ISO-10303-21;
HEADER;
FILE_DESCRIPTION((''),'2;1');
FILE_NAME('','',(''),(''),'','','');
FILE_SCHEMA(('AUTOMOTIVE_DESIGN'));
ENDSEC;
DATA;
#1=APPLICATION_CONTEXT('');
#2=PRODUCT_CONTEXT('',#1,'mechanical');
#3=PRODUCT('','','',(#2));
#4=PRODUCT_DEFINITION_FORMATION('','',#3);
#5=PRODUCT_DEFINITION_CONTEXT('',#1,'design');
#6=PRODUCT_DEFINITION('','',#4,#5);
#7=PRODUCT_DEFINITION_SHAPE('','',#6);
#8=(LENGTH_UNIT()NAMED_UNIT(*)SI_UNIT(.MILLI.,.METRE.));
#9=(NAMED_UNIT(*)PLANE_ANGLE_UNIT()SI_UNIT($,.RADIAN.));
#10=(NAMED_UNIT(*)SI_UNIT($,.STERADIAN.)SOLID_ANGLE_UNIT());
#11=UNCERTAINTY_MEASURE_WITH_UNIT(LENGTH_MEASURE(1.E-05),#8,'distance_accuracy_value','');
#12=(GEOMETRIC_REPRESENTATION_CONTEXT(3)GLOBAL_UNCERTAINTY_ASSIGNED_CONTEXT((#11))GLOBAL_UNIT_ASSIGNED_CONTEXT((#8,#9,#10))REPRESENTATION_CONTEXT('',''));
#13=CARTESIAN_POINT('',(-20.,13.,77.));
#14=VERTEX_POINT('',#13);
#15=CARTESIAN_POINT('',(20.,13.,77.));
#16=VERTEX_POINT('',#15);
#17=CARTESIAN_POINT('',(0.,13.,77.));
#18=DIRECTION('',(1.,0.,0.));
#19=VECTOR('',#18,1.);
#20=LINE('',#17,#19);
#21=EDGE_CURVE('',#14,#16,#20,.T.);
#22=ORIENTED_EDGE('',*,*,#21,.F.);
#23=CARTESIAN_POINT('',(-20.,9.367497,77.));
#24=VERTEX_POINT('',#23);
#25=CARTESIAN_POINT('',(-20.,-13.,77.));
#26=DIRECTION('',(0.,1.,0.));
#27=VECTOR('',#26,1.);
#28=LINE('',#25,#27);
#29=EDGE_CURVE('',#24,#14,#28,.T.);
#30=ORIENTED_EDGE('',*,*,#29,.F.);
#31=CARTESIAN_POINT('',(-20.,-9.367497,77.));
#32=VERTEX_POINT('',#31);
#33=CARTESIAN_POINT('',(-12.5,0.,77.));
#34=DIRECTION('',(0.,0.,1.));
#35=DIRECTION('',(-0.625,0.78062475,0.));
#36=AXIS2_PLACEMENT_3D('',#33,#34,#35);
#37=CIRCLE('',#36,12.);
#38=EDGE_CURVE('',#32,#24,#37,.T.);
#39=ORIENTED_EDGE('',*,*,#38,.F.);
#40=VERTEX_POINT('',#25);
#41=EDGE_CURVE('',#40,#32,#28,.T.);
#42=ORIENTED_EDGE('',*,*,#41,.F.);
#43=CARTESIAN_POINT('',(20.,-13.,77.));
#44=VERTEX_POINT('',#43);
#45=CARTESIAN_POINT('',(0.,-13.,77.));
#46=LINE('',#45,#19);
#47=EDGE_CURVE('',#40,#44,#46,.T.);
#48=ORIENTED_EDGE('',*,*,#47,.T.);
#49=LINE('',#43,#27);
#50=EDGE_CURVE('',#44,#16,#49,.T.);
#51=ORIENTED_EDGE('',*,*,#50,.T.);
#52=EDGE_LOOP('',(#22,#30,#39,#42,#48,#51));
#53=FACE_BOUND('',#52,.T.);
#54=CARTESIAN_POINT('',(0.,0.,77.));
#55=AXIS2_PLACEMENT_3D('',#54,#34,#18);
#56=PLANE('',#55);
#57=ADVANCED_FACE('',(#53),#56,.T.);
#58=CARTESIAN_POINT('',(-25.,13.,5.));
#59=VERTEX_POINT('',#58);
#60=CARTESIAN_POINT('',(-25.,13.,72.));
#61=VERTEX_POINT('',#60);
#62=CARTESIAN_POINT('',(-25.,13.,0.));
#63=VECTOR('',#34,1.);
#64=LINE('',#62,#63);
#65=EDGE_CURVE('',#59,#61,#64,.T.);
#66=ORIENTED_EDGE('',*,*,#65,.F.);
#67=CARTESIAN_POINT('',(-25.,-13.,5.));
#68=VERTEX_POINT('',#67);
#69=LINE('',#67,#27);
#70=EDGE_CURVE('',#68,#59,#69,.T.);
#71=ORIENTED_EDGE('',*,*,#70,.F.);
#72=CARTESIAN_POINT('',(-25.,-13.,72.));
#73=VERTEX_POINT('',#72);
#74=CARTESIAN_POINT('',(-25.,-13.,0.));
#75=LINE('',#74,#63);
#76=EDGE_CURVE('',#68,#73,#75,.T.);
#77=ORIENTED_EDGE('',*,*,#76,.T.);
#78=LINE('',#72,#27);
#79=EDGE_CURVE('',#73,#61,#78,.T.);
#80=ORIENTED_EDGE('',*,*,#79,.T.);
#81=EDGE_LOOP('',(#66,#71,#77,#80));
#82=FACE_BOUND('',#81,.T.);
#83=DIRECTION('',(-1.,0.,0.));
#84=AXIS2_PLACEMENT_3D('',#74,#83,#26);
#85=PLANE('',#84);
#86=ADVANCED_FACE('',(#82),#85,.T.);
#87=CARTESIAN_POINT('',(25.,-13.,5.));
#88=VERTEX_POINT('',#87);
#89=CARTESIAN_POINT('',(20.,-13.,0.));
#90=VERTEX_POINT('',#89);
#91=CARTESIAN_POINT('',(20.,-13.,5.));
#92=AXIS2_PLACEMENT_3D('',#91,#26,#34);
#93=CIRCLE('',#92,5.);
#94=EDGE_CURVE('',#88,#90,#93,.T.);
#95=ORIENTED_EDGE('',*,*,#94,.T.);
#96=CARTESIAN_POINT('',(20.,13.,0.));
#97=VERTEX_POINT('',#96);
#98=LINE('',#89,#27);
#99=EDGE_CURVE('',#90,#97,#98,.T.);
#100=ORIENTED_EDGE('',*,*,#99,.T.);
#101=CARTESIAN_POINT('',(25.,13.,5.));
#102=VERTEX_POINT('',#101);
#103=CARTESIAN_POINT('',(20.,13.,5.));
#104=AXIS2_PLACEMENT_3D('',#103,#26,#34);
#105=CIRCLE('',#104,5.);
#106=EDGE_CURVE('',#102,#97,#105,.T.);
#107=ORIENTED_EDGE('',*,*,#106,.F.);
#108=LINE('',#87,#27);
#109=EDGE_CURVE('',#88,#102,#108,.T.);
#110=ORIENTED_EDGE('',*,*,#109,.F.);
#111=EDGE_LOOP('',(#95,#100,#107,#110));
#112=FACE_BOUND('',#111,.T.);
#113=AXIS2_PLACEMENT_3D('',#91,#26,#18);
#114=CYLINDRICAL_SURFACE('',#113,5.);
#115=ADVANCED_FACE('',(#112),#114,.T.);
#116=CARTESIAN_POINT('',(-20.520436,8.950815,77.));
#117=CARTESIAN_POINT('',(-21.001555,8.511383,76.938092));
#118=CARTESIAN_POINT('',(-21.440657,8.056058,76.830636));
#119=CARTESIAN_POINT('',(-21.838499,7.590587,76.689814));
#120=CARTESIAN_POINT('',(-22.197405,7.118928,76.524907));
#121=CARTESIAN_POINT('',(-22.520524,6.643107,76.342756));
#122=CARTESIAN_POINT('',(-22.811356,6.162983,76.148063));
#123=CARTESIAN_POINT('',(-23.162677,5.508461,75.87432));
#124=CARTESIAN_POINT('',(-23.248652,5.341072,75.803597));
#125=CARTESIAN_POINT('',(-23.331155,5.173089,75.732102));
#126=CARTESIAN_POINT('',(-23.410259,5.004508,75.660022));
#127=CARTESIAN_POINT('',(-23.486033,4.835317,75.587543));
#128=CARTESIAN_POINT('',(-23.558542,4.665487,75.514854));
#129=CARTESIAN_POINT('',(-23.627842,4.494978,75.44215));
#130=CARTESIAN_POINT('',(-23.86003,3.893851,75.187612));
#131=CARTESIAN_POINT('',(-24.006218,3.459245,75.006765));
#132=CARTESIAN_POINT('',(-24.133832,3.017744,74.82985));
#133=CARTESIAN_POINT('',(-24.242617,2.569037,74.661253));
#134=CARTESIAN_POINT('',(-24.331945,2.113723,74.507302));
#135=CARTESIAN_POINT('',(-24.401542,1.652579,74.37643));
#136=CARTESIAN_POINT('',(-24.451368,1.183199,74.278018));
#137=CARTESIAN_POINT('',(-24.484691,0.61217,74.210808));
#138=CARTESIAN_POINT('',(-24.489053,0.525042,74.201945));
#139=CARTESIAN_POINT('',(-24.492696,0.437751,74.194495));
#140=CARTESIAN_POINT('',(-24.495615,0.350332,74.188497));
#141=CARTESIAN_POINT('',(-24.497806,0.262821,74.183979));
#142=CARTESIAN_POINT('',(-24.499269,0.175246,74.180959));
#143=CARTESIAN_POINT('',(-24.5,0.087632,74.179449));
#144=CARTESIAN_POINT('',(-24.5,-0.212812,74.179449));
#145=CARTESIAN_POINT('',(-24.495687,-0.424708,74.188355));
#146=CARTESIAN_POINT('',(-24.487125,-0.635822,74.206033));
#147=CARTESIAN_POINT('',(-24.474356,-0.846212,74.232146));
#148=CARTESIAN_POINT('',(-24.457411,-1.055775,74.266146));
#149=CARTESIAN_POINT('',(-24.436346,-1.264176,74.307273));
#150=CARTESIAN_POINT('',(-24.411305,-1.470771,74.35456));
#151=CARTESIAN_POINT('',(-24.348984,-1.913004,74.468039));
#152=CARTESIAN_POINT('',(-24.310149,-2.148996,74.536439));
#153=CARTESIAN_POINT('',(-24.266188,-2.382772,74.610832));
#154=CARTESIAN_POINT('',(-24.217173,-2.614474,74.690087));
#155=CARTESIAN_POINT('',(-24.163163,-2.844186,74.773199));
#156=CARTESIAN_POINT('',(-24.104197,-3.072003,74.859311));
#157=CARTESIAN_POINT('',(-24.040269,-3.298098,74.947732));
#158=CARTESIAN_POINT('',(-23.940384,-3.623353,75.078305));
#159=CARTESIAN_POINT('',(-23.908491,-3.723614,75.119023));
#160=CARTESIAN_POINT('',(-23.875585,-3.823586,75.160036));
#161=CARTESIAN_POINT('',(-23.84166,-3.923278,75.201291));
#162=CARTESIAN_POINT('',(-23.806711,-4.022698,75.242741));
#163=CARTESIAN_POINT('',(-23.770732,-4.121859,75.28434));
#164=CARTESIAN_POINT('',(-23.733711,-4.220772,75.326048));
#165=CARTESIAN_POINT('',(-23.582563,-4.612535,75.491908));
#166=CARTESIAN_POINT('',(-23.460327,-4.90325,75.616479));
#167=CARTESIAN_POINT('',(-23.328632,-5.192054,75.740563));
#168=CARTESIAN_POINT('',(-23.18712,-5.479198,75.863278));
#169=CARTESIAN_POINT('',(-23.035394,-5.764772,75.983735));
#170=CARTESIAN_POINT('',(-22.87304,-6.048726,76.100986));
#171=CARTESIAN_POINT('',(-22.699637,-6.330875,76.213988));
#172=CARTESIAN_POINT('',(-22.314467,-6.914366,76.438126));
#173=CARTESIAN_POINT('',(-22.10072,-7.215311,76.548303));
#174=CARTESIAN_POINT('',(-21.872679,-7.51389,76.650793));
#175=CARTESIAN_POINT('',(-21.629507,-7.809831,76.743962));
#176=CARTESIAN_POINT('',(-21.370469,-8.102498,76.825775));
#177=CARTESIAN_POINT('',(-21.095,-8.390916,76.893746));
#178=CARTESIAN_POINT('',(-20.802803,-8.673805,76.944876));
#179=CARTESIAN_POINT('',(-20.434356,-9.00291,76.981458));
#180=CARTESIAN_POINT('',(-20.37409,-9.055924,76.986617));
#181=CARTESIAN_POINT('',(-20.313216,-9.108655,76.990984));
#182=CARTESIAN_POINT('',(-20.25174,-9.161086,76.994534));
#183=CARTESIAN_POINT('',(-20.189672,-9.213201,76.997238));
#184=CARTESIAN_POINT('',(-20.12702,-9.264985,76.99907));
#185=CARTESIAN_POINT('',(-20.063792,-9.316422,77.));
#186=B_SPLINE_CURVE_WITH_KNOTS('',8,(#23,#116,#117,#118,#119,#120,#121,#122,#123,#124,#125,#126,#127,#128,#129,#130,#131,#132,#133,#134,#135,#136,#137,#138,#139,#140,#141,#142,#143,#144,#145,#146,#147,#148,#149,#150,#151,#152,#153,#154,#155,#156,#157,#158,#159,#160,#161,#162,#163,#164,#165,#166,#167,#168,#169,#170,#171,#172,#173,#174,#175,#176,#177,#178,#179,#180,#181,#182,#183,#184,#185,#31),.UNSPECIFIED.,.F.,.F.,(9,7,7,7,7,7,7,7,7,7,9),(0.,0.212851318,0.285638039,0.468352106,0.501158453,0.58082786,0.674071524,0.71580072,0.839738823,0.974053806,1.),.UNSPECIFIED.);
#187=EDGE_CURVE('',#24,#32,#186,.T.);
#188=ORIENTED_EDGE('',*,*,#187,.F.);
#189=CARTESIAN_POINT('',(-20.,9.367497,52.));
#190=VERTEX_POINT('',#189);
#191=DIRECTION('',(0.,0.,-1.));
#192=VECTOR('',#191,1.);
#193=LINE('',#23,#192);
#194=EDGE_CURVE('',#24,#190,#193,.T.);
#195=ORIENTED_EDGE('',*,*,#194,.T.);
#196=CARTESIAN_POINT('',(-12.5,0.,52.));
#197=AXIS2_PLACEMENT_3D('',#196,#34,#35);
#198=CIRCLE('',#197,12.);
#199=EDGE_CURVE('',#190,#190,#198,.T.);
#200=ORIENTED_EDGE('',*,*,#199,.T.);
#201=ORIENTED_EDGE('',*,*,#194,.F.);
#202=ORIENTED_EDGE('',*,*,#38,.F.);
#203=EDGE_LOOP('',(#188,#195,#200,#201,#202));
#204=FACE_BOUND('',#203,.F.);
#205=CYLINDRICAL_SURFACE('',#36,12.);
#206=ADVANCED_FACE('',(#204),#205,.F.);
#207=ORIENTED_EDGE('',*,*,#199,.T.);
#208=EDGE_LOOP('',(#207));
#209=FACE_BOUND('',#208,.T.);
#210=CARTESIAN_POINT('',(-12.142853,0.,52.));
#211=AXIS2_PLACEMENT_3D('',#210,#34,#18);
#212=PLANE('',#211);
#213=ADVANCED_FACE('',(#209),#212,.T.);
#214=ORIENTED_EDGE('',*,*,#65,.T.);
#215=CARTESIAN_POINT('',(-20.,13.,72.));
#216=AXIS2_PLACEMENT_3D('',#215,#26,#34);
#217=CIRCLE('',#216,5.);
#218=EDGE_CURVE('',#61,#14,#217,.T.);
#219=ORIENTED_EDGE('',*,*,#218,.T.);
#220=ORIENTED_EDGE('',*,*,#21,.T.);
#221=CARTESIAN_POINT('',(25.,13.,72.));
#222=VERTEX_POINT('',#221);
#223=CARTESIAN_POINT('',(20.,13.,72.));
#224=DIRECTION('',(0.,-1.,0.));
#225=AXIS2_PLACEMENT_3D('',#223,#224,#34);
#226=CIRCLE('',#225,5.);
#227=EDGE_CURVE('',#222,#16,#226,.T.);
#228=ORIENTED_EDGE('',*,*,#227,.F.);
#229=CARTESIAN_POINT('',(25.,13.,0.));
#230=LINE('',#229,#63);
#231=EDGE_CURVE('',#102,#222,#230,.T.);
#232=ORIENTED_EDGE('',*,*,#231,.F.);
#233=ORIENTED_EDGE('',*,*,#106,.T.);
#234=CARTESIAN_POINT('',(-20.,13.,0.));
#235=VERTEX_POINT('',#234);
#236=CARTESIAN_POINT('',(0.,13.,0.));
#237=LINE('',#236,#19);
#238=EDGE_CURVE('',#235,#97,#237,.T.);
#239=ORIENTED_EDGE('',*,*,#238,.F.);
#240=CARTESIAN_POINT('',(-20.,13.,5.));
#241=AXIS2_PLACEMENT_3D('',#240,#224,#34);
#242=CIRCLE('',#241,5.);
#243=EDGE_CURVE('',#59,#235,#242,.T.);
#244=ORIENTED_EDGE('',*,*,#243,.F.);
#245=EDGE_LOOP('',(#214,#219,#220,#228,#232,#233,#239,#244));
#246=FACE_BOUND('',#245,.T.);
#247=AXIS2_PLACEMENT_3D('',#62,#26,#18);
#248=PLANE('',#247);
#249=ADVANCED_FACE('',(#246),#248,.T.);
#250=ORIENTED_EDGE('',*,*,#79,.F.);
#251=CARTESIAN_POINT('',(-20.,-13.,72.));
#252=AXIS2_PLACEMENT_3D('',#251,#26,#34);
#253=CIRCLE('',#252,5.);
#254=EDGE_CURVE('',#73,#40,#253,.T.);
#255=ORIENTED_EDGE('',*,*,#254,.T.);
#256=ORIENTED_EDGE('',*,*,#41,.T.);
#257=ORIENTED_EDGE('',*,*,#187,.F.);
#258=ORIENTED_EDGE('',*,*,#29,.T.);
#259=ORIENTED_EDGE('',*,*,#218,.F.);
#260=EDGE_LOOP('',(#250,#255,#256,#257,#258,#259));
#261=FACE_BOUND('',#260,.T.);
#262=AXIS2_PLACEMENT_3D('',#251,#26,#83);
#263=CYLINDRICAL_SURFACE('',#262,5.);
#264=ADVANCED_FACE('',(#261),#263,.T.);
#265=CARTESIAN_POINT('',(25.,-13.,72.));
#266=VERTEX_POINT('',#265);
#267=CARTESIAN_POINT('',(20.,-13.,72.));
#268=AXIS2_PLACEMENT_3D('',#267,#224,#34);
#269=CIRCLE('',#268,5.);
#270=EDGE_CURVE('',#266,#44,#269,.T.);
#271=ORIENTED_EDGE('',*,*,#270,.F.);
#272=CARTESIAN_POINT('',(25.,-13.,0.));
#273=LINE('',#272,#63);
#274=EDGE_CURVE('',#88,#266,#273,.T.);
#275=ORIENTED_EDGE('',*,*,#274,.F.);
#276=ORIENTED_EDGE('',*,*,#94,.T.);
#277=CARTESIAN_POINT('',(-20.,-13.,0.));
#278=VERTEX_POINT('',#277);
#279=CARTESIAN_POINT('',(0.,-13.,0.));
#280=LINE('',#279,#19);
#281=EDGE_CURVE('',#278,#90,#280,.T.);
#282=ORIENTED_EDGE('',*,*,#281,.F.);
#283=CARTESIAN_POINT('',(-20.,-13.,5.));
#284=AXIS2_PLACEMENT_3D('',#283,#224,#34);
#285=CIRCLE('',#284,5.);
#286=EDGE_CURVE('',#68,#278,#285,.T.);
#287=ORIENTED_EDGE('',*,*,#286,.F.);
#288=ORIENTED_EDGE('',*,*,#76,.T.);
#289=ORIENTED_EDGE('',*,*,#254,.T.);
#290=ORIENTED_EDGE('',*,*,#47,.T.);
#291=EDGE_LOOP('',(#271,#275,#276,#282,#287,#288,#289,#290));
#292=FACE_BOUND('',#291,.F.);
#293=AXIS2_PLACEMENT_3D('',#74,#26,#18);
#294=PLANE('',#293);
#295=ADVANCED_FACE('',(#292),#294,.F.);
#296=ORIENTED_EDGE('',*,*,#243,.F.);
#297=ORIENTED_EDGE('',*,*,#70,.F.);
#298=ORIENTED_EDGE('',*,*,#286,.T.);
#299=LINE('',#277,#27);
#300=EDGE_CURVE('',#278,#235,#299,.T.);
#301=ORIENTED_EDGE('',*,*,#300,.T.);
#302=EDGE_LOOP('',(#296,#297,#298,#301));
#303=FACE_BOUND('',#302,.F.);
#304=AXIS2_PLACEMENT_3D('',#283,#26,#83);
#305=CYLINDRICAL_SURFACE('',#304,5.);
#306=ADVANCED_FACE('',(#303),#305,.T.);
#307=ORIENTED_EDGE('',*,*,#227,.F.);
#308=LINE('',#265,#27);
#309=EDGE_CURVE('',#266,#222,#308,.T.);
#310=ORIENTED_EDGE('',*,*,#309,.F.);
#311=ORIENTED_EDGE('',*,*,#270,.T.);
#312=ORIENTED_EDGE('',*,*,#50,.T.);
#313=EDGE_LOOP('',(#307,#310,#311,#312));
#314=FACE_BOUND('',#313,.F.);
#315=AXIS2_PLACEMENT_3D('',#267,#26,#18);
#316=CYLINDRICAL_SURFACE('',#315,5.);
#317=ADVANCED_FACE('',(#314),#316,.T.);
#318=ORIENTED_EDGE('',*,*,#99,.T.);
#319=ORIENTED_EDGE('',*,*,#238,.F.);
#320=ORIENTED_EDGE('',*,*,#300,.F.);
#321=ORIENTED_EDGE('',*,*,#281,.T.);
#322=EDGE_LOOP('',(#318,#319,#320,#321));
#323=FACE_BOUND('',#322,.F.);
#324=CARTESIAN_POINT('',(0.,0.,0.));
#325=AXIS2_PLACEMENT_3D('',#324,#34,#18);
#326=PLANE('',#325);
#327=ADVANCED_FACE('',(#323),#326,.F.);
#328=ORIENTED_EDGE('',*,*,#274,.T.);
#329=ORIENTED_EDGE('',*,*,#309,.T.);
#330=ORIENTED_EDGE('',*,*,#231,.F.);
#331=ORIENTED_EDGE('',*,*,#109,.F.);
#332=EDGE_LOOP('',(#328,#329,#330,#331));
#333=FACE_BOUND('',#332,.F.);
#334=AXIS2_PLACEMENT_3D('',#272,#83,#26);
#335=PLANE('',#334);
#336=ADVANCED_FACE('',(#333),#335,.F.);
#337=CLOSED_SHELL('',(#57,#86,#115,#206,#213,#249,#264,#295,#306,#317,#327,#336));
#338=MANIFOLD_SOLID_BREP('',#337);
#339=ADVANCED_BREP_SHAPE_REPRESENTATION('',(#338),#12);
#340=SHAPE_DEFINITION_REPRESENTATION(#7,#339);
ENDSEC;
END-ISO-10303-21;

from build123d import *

# Parameters (mm, degrees)
F0_W     = 50
F0_H     = 26
F1_DEPTH = 77
F2_R     = 5
F4_DEPTH = 25


with BuildPart() as f1:
    # F0 (on Top) → F1 (new body)
    with BuildSketch(Plane.XY):
        Rectangle(F0_W, F0_H)
    extrude(amount=F1_DEPTH)

    # F2
    f2_edges = [f1.edges().sort_by_distance(p)[0] for p in [
        (-25, 0, 0),
        (25, 0, 0),
        (-25, 0, 77),
        (25, 0, 77),
    ]]
    fillet(f2_edges, radius=F2_R)

    # F3 (on face) → F4 (cut)
    with BuildSketch(Plane.XY.offset(77)):
        with BuildLine():
            ThreePointArc((-20, -9.3674969976), (-7.3038475773, -10.8166538264), (-0.5, 0))
            ThreePointArc((-0.5, 0), (-7.3038475773, 10.8166538264), (-20, 9.3674969976))
            Line((-20, 9.3674969976), (-20, -9.3674969976))
        make_face()
        with BuildLine():
            Line((-20, -9.3674969976), (-20, 9.3674969976))
            ThreePointArc((-20, 9.3674969976), (-24.5, 0), (-20, -9.3674969976))
        make_face()
    extrude(amount=-F4_DEPTH, mode=Mode.SUBTRACT)


solid = f1.part
